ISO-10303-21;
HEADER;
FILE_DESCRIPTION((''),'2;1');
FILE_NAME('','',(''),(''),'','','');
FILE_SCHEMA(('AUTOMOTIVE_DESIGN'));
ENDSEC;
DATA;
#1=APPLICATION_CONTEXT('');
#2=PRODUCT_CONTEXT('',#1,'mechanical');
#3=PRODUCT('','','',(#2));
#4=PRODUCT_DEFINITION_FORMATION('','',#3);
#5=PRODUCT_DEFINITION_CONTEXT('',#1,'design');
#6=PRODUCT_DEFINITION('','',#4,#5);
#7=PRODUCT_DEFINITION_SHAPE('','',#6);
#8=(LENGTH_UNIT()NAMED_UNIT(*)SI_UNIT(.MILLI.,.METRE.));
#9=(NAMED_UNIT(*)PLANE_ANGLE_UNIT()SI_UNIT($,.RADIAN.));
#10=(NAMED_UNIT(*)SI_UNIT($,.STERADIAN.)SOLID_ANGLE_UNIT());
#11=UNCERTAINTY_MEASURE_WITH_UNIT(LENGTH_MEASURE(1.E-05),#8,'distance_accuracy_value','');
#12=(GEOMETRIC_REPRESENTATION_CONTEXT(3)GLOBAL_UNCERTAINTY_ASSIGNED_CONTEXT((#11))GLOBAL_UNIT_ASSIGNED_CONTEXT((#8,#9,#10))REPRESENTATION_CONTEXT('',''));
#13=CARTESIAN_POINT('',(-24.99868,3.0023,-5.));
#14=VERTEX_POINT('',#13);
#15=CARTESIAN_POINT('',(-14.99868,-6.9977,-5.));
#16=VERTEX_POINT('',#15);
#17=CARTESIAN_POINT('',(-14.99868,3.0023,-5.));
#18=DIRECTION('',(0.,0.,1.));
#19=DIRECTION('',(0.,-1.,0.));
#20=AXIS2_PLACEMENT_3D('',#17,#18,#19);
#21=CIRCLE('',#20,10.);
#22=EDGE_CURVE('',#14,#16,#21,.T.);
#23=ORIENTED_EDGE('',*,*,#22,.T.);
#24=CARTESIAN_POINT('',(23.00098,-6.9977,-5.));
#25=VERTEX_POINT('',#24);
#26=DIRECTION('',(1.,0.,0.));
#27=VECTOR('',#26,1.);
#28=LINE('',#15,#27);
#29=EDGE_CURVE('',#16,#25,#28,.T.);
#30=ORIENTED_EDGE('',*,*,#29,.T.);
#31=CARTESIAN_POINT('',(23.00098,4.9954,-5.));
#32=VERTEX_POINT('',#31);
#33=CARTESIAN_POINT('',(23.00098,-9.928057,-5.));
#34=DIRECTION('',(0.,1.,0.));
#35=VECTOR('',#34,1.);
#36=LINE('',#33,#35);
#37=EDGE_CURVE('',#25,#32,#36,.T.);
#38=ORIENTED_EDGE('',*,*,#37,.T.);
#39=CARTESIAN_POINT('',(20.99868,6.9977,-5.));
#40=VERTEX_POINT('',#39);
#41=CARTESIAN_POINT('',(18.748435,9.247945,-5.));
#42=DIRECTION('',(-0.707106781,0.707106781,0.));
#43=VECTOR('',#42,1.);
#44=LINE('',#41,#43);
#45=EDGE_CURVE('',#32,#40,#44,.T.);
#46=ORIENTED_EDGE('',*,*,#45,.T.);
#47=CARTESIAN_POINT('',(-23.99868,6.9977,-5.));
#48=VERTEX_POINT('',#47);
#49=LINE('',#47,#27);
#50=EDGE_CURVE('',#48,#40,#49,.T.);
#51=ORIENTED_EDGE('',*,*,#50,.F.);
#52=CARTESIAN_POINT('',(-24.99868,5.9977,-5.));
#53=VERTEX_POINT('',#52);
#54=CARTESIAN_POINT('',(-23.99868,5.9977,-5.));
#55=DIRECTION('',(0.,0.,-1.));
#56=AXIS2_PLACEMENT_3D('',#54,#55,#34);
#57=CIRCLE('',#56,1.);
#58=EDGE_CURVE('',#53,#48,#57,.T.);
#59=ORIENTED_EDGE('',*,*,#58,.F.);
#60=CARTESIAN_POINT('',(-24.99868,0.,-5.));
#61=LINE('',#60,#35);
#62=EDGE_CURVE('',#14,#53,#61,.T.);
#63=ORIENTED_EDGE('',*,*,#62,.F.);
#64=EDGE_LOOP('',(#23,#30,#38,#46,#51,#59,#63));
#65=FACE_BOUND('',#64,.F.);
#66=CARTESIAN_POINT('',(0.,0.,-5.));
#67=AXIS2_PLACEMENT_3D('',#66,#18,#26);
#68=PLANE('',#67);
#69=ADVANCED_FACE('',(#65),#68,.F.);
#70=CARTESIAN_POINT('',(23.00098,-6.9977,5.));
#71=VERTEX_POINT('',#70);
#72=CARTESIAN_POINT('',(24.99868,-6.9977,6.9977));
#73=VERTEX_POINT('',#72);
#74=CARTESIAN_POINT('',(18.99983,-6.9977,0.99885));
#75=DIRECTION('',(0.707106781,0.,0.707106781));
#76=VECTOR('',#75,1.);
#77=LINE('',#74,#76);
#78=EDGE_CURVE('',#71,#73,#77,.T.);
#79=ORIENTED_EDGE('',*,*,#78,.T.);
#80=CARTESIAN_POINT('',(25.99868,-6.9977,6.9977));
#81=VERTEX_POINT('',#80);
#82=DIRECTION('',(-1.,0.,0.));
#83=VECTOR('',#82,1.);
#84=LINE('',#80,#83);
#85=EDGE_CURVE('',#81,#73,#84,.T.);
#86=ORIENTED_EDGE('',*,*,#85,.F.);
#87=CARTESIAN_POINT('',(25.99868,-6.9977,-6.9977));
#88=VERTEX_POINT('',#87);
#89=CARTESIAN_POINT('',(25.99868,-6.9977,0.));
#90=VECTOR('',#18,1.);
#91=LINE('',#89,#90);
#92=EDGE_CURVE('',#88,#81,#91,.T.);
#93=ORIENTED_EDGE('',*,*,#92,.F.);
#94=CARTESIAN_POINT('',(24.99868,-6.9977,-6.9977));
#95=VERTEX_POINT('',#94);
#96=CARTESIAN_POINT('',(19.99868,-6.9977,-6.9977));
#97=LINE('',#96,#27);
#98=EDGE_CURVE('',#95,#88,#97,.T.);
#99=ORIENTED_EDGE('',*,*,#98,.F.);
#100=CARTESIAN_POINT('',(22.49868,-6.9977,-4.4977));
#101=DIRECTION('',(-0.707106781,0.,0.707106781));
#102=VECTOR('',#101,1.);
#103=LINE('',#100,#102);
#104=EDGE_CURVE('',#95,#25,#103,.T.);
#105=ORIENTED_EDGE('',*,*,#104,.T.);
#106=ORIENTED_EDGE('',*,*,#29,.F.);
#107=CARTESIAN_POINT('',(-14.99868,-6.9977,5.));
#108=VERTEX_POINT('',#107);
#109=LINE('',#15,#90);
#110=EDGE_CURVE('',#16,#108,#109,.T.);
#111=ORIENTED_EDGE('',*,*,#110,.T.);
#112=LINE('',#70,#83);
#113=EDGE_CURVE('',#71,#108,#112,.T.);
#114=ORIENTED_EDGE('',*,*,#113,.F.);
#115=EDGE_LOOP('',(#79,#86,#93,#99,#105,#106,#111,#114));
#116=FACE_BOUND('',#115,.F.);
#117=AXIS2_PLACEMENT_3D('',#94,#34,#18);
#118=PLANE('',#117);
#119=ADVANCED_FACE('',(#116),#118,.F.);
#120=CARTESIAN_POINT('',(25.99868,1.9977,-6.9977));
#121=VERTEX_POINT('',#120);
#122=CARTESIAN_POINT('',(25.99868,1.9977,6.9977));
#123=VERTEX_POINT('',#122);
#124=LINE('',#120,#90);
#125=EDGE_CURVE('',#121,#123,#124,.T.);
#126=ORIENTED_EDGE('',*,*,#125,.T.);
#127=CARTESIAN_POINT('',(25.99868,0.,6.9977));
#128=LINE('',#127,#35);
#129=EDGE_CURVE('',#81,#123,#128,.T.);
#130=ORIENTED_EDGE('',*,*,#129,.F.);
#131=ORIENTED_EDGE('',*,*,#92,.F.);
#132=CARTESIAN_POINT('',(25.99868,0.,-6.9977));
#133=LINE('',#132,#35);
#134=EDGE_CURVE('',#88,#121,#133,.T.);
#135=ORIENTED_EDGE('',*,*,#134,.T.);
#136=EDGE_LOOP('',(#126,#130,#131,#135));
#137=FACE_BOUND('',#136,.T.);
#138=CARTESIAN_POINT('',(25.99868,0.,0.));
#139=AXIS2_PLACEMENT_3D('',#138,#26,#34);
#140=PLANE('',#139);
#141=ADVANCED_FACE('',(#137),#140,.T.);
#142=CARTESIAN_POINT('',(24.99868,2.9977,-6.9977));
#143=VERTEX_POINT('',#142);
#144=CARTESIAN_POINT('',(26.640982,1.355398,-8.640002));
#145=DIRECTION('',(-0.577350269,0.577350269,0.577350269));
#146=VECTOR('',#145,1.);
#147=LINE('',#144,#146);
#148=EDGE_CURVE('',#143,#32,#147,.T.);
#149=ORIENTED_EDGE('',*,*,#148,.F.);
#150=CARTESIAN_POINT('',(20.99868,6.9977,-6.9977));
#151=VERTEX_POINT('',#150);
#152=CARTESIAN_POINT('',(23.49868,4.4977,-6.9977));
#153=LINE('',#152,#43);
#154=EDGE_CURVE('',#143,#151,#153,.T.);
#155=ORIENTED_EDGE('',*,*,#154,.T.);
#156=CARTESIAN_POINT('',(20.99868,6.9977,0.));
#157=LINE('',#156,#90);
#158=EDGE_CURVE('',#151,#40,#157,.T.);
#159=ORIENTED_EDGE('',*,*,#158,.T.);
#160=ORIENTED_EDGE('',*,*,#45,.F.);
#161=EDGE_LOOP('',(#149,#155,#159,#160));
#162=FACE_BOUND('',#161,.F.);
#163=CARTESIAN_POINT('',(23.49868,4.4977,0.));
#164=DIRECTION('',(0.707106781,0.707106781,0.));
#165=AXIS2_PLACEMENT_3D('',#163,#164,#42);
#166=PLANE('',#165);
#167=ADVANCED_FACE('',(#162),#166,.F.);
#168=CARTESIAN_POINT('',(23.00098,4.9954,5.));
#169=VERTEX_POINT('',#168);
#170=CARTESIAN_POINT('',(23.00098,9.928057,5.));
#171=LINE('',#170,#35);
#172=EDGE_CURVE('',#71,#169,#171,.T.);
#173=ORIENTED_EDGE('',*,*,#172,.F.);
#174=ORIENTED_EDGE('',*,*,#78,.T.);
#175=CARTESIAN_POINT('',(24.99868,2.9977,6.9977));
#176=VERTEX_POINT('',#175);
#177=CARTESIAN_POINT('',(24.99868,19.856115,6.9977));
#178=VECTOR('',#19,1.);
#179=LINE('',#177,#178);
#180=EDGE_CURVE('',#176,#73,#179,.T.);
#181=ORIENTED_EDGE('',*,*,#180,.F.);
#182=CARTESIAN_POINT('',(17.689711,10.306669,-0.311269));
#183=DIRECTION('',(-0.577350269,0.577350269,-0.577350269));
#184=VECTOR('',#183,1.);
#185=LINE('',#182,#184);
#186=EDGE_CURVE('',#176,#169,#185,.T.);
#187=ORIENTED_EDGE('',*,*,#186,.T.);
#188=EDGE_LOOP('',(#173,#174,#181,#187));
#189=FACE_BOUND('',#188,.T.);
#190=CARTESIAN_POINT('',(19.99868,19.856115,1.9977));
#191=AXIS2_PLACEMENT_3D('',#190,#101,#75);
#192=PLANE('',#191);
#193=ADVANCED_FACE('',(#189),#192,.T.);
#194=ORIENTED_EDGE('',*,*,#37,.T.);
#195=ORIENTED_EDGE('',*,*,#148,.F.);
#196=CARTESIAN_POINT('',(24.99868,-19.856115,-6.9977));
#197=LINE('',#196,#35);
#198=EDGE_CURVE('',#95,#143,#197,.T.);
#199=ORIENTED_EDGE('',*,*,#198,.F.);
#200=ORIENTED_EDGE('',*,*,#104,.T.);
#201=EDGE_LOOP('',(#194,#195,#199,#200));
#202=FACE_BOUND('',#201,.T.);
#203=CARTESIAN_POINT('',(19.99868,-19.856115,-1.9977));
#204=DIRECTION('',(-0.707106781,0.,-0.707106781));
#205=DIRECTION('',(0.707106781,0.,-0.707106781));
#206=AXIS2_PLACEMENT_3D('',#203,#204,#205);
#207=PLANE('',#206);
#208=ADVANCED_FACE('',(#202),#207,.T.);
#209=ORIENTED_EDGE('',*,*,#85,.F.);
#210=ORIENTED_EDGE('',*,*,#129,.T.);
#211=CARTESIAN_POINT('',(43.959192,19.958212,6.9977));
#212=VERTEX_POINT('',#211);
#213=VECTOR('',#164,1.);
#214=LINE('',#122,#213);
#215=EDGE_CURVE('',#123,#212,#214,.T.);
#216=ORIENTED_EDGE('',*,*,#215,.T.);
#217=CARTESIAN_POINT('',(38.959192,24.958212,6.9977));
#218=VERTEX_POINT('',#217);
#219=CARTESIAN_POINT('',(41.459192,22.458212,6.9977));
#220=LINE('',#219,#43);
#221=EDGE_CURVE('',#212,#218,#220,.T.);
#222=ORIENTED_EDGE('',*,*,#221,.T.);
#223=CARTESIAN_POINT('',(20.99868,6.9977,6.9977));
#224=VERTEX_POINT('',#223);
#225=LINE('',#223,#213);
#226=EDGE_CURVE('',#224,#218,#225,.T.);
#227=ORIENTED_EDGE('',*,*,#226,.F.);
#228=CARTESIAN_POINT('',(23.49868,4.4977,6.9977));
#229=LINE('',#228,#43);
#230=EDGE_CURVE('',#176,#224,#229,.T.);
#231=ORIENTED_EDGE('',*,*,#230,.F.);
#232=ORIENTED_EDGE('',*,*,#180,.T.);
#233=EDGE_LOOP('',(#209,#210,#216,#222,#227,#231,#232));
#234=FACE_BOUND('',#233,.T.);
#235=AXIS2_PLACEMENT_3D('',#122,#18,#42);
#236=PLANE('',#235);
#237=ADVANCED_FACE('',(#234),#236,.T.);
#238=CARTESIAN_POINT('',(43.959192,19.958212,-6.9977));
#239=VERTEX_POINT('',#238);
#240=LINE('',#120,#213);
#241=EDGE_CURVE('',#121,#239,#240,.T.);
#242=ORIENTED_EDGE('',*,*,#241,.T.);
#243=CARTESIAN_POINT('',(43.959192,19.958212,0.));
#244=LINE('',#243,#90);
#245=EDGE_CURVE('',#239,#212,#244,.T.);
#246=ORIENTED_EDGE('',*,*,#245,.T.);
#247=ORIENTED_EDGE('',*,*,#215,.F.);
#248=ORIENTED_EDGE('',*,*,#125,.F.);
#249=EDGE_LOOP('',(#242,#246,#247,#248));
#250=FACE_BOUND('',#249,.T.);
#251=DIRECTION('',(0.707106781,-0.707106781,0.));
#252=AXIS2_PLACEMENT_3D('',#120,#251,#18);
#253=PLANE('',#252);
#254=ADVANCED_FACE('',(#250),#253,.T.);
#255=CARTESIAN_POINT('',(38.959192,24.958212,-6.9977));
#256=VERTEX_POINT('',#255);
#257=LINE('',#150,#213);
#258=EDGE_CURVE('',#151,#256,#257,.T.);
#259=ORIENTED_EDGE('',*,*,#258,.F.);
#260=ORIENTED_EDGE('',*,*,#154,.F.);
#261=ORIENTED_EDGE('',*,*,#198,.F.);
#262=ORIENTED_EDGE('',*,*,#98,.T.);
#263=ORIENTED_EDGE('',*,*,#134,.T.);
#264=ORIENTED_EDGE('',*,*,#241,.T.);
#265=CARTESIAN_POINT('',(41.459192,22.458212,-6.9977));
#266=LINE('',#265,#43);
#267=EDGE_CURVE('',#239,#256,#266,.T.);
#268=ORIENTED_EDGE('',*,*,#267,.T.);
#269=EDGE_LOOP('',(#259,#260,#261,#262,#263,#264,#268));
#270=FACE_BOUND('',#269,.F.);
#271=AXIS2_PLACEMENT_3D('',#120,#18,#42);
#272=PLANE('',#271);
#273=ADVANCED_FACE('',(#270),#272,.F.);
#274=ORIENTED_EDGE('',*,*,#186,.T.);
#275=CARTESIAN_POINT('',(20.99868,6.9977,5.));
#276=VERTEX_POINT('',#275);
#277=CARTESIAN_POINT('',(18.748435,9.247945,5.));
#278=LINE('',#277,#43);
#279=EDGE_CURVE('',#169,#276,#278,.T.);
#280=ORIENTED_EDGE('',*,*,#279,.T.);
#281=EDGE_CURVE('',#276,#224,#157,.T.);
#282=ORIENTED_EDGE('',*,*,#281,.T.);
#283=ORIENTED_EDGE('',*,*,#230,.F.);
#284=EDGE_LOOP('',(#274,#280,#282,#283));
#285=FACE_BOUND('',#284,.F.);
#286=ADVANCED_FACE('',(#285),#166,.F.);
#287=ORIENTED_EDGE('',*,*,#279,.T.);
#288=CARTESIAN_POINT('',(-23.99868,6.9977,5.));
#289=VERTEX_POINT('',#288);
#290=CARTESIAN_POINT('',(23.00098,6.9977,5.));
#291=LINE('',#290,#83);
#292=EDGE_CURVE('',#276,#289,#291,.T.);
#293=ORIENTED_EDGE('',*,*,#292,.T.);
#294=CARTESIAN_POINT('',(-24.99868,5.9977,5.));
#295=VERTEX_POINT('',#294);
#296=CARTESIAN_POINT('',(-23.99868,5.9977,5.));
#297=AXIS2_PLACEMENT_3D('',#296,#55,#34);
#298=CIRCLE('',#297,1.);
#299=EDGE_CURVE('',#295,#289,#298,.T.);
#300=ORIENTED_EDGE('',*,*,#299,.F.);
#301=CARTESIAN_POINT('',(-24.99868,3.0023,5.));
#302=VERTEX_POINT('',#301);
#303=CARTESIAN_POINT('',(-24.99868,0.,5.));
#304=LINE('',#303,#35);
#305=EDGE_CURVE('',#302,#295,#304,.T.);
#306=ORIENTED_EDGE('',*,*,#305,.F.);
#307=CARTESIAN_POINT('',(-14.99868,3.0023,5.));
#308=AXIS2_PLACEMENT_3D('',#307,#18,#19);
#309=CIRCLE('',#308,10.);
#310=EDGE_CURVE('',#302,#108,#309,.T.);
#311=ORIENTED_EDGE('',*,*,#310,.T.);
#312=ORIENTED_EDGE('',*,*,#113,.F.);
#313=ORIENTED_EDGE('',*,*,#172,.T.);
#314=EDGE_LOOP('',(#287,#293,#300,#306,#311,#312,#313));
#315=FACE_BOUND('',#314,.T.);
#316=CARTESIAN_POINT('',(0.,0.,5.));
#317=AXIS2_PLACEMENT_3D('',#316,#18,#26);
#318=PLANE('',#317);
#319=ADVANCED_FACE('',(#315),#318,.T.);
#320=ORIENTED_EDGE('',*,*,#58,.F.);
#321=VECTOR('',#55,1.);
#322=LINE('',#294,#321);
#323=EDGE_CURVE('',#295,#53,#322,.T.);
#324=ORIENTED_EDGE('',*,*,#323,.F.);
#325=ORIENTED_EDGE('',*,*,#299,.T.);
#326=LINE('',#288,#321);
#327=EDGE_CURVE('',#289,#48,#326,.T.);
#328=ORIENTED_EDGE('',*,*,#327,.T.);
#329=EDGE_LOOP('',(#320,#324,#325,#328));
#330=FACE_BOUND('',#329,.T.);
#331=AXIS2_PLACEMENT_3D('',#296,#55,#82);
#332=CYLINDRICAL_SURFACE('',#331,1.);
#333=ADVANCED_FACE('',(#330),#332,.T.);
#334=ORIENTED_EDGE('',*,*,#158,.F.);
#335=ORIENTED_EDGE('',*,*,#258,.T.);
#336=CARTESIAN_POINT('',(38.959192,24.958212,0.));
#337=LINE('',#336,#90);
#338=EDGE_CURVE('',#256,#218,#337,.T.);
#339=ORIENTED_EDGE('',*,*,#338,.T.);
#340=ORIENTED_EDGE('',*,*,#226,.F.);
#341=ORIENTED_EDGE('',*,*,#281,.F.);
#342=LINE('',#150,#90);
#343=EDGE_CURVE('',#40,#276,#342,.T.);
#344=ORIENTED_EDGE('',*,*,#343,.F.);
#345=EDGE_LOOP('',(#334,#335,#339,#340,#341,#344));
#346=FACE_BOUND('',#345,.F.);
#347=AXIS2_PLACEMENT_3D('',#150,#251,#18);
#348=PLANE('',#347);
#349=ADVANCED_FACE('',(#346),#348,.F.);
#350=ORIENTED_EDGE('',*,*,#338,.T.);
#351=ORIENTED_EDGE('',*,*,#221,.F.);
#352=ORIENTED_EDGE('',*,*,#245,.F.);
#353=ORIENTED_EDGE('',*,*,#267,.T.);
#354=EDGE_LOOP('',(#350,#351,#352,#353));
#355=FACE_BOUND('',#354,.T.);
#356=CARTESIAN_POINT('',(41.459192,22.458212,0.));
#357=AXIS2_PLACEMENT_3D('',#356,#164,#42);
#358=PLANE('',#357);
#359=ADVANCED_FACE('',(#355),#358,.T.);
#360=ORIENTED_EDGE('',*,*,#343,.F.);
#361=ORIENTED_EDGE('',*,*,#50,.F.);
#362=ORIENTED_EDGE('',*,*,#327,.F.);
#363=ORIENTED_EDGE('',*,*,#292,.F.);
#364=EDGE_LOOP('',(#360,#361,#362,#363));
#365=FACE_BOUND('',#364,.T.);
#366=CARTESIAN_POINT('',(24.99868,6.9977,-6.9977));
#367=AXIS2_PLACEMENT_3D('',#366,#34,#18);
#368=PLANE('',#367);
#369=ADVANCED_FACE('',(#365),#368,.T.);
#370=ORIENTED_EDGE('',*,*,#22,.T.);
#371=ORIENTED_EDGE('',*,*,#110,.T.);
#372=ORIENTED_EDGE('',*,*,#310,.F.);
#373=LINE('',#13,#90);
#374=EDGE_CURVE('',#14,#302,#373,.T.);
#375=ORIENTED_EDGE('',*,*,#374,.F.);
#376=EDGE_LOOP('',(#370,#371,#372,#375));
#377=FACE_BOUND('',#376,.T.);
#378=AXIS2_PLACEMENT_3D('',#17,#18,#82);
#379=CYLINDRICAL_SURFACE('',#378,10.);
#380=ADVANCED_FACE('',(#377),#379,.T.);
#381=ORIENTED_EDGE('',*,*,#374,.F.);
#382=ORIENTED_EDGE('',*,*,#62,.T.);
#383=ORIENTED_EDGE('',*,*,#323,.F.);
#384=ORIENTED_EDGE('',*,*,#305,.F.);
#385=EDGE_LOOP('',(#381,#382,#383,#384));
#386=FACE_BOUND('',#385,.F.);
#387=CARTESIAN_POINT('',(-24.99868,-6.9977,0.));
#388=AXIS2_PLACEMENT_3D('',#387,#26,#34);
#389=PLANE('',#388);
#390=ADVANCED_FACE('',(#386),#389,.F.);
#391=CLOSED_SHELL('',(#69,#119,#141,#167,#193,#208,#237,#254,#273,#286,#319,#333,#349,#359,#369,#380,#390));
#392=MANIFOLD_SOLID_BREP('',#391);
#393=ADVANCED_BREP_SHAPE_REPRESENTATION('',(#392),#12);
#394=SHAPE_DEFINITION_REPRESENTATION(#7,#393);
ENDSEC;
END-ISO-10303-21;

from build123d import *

# Parameters (mm, degrees)
F0_W          = 49.99736
F0_H          = 13.9954
F1_DEPTH      = 5
F1_DEPTH_BACK = 5
F2_R          = 1
F3_R          = 10
F4_W          = 13.9954
F4_H          = 13.9954
F5_DEPTH      = 1
F5_DEPTH_BACK = 5
F6_T4_DEPTH   = 39.7122298797
F6_T9_DEPTH   = 39.7122298797
F7_SIZE       = 5
F8_W          = 7.0710678119
F8_H          = 13.9954
F9_DEPTH      = 25.4


# Not quite as in the source:
# - a fillet or chamfer that OpenCascade refuses, or shapes differently, is made with other operations: its cross-section is extruded or revolved along the edge and cut away or added


with BuildPart() as f1:
    # F0 (on Top) → F1 (new body, two sides)
    with BuildSketch(Plane.XY) as f1_sk:
        Rectangle(F0_W, F0_H)
    extrude(amount=F1_DEPTH)
    extrude(f1_sk.sketch, amount=-F1_DEPTH_BACK)

    # F2
    f2_edges = [f1.edges().sort_by_distance(p)[0] for p in [
        (-24.99868, 6.9977, 0),
    ]]
    fillet(f2_edges, radius=F2_R)

    # F3
    f3_edges = [f1.edges().sort_by_distance(p)[0] for p in [
        (-24.99868, -6.9977, 0),
    ]]
    fillet(f3_edges, radius=F3_R)

    # F4 (on face) → F5 (join, two sides)
    with BuildSketch(Plane.YZ.offset(24.99868)) as f5_sk:
        Rectangle(F4_W, F4_H)
    extrude(amount=F5_DEPTH)
    extrude(f5_sk.sketch, amount=-F5_DEPTH_BACK)

    # F6: chamfer of 5 on 2 edges, made by hand


with BuildPart() as f6_tool2:
    # F6_s3 → F6_t4 (new body)
    with BuildSketch(Plane.XZ.offset(-19.8561149398)):
        Polygon((19.99868, 1.9977), (24.99868, 6.9977), (19.99868, 6.9977), align=None)
    extrude(amount=F6_T4_DEPTH)

    split(bisect_by=Plane.XY.offset(5), keep=Keep.TOP)


with BuildPart() as f1_1:
    add(f1.part)

    # F6_t1: cut F6_tool2
    add(f6_tool2.part, mode=Mode.SUBTRACT)


with BuildPart() as f6_tool7:
    # F6_s8 → F6_t9 (new body)
    with BuildSketch(Plane.XZ.offset(19.8561149398)):
        Polygon((19.99868, -1.9977), (24.99868, -6.9977), (19.99868, -6.9977), align=None)
    extrude(amount=-F6_T9_DEPTH)

    split(bisect_by=Plane.XY.offset(-5), keep=Keep.BOTTOM)


with BuildPart() as f1_2:
    add(f1_1.part)

    # F6_t6: cut F6_tool7
    add(f6_tool7.part, mode=Mode.SUBTRACT)

    # F7
    f7_edges = [f1_2.edges().sort_by_distance(p)[0] for p in [
        (25.99868, 6.9977, 0),
    ]]
    chamfer(f7_edges, length=F7_SIZE)

    # F8 (on face) → F9 (join)
    with BuildSketch(Plane(origin=(13.99819, 13.99819, 0), x_dir=(-0.7071067812, 0.7071067812, 0), z_dir=(0.7071067812, 0.7071067812, 0))):
        with Locations((-13.4357218072, 0)):
            Rectangle(F8_W, F8_H)
    extrude(amount=F9_DEPTH)


solid = f1_2.part
